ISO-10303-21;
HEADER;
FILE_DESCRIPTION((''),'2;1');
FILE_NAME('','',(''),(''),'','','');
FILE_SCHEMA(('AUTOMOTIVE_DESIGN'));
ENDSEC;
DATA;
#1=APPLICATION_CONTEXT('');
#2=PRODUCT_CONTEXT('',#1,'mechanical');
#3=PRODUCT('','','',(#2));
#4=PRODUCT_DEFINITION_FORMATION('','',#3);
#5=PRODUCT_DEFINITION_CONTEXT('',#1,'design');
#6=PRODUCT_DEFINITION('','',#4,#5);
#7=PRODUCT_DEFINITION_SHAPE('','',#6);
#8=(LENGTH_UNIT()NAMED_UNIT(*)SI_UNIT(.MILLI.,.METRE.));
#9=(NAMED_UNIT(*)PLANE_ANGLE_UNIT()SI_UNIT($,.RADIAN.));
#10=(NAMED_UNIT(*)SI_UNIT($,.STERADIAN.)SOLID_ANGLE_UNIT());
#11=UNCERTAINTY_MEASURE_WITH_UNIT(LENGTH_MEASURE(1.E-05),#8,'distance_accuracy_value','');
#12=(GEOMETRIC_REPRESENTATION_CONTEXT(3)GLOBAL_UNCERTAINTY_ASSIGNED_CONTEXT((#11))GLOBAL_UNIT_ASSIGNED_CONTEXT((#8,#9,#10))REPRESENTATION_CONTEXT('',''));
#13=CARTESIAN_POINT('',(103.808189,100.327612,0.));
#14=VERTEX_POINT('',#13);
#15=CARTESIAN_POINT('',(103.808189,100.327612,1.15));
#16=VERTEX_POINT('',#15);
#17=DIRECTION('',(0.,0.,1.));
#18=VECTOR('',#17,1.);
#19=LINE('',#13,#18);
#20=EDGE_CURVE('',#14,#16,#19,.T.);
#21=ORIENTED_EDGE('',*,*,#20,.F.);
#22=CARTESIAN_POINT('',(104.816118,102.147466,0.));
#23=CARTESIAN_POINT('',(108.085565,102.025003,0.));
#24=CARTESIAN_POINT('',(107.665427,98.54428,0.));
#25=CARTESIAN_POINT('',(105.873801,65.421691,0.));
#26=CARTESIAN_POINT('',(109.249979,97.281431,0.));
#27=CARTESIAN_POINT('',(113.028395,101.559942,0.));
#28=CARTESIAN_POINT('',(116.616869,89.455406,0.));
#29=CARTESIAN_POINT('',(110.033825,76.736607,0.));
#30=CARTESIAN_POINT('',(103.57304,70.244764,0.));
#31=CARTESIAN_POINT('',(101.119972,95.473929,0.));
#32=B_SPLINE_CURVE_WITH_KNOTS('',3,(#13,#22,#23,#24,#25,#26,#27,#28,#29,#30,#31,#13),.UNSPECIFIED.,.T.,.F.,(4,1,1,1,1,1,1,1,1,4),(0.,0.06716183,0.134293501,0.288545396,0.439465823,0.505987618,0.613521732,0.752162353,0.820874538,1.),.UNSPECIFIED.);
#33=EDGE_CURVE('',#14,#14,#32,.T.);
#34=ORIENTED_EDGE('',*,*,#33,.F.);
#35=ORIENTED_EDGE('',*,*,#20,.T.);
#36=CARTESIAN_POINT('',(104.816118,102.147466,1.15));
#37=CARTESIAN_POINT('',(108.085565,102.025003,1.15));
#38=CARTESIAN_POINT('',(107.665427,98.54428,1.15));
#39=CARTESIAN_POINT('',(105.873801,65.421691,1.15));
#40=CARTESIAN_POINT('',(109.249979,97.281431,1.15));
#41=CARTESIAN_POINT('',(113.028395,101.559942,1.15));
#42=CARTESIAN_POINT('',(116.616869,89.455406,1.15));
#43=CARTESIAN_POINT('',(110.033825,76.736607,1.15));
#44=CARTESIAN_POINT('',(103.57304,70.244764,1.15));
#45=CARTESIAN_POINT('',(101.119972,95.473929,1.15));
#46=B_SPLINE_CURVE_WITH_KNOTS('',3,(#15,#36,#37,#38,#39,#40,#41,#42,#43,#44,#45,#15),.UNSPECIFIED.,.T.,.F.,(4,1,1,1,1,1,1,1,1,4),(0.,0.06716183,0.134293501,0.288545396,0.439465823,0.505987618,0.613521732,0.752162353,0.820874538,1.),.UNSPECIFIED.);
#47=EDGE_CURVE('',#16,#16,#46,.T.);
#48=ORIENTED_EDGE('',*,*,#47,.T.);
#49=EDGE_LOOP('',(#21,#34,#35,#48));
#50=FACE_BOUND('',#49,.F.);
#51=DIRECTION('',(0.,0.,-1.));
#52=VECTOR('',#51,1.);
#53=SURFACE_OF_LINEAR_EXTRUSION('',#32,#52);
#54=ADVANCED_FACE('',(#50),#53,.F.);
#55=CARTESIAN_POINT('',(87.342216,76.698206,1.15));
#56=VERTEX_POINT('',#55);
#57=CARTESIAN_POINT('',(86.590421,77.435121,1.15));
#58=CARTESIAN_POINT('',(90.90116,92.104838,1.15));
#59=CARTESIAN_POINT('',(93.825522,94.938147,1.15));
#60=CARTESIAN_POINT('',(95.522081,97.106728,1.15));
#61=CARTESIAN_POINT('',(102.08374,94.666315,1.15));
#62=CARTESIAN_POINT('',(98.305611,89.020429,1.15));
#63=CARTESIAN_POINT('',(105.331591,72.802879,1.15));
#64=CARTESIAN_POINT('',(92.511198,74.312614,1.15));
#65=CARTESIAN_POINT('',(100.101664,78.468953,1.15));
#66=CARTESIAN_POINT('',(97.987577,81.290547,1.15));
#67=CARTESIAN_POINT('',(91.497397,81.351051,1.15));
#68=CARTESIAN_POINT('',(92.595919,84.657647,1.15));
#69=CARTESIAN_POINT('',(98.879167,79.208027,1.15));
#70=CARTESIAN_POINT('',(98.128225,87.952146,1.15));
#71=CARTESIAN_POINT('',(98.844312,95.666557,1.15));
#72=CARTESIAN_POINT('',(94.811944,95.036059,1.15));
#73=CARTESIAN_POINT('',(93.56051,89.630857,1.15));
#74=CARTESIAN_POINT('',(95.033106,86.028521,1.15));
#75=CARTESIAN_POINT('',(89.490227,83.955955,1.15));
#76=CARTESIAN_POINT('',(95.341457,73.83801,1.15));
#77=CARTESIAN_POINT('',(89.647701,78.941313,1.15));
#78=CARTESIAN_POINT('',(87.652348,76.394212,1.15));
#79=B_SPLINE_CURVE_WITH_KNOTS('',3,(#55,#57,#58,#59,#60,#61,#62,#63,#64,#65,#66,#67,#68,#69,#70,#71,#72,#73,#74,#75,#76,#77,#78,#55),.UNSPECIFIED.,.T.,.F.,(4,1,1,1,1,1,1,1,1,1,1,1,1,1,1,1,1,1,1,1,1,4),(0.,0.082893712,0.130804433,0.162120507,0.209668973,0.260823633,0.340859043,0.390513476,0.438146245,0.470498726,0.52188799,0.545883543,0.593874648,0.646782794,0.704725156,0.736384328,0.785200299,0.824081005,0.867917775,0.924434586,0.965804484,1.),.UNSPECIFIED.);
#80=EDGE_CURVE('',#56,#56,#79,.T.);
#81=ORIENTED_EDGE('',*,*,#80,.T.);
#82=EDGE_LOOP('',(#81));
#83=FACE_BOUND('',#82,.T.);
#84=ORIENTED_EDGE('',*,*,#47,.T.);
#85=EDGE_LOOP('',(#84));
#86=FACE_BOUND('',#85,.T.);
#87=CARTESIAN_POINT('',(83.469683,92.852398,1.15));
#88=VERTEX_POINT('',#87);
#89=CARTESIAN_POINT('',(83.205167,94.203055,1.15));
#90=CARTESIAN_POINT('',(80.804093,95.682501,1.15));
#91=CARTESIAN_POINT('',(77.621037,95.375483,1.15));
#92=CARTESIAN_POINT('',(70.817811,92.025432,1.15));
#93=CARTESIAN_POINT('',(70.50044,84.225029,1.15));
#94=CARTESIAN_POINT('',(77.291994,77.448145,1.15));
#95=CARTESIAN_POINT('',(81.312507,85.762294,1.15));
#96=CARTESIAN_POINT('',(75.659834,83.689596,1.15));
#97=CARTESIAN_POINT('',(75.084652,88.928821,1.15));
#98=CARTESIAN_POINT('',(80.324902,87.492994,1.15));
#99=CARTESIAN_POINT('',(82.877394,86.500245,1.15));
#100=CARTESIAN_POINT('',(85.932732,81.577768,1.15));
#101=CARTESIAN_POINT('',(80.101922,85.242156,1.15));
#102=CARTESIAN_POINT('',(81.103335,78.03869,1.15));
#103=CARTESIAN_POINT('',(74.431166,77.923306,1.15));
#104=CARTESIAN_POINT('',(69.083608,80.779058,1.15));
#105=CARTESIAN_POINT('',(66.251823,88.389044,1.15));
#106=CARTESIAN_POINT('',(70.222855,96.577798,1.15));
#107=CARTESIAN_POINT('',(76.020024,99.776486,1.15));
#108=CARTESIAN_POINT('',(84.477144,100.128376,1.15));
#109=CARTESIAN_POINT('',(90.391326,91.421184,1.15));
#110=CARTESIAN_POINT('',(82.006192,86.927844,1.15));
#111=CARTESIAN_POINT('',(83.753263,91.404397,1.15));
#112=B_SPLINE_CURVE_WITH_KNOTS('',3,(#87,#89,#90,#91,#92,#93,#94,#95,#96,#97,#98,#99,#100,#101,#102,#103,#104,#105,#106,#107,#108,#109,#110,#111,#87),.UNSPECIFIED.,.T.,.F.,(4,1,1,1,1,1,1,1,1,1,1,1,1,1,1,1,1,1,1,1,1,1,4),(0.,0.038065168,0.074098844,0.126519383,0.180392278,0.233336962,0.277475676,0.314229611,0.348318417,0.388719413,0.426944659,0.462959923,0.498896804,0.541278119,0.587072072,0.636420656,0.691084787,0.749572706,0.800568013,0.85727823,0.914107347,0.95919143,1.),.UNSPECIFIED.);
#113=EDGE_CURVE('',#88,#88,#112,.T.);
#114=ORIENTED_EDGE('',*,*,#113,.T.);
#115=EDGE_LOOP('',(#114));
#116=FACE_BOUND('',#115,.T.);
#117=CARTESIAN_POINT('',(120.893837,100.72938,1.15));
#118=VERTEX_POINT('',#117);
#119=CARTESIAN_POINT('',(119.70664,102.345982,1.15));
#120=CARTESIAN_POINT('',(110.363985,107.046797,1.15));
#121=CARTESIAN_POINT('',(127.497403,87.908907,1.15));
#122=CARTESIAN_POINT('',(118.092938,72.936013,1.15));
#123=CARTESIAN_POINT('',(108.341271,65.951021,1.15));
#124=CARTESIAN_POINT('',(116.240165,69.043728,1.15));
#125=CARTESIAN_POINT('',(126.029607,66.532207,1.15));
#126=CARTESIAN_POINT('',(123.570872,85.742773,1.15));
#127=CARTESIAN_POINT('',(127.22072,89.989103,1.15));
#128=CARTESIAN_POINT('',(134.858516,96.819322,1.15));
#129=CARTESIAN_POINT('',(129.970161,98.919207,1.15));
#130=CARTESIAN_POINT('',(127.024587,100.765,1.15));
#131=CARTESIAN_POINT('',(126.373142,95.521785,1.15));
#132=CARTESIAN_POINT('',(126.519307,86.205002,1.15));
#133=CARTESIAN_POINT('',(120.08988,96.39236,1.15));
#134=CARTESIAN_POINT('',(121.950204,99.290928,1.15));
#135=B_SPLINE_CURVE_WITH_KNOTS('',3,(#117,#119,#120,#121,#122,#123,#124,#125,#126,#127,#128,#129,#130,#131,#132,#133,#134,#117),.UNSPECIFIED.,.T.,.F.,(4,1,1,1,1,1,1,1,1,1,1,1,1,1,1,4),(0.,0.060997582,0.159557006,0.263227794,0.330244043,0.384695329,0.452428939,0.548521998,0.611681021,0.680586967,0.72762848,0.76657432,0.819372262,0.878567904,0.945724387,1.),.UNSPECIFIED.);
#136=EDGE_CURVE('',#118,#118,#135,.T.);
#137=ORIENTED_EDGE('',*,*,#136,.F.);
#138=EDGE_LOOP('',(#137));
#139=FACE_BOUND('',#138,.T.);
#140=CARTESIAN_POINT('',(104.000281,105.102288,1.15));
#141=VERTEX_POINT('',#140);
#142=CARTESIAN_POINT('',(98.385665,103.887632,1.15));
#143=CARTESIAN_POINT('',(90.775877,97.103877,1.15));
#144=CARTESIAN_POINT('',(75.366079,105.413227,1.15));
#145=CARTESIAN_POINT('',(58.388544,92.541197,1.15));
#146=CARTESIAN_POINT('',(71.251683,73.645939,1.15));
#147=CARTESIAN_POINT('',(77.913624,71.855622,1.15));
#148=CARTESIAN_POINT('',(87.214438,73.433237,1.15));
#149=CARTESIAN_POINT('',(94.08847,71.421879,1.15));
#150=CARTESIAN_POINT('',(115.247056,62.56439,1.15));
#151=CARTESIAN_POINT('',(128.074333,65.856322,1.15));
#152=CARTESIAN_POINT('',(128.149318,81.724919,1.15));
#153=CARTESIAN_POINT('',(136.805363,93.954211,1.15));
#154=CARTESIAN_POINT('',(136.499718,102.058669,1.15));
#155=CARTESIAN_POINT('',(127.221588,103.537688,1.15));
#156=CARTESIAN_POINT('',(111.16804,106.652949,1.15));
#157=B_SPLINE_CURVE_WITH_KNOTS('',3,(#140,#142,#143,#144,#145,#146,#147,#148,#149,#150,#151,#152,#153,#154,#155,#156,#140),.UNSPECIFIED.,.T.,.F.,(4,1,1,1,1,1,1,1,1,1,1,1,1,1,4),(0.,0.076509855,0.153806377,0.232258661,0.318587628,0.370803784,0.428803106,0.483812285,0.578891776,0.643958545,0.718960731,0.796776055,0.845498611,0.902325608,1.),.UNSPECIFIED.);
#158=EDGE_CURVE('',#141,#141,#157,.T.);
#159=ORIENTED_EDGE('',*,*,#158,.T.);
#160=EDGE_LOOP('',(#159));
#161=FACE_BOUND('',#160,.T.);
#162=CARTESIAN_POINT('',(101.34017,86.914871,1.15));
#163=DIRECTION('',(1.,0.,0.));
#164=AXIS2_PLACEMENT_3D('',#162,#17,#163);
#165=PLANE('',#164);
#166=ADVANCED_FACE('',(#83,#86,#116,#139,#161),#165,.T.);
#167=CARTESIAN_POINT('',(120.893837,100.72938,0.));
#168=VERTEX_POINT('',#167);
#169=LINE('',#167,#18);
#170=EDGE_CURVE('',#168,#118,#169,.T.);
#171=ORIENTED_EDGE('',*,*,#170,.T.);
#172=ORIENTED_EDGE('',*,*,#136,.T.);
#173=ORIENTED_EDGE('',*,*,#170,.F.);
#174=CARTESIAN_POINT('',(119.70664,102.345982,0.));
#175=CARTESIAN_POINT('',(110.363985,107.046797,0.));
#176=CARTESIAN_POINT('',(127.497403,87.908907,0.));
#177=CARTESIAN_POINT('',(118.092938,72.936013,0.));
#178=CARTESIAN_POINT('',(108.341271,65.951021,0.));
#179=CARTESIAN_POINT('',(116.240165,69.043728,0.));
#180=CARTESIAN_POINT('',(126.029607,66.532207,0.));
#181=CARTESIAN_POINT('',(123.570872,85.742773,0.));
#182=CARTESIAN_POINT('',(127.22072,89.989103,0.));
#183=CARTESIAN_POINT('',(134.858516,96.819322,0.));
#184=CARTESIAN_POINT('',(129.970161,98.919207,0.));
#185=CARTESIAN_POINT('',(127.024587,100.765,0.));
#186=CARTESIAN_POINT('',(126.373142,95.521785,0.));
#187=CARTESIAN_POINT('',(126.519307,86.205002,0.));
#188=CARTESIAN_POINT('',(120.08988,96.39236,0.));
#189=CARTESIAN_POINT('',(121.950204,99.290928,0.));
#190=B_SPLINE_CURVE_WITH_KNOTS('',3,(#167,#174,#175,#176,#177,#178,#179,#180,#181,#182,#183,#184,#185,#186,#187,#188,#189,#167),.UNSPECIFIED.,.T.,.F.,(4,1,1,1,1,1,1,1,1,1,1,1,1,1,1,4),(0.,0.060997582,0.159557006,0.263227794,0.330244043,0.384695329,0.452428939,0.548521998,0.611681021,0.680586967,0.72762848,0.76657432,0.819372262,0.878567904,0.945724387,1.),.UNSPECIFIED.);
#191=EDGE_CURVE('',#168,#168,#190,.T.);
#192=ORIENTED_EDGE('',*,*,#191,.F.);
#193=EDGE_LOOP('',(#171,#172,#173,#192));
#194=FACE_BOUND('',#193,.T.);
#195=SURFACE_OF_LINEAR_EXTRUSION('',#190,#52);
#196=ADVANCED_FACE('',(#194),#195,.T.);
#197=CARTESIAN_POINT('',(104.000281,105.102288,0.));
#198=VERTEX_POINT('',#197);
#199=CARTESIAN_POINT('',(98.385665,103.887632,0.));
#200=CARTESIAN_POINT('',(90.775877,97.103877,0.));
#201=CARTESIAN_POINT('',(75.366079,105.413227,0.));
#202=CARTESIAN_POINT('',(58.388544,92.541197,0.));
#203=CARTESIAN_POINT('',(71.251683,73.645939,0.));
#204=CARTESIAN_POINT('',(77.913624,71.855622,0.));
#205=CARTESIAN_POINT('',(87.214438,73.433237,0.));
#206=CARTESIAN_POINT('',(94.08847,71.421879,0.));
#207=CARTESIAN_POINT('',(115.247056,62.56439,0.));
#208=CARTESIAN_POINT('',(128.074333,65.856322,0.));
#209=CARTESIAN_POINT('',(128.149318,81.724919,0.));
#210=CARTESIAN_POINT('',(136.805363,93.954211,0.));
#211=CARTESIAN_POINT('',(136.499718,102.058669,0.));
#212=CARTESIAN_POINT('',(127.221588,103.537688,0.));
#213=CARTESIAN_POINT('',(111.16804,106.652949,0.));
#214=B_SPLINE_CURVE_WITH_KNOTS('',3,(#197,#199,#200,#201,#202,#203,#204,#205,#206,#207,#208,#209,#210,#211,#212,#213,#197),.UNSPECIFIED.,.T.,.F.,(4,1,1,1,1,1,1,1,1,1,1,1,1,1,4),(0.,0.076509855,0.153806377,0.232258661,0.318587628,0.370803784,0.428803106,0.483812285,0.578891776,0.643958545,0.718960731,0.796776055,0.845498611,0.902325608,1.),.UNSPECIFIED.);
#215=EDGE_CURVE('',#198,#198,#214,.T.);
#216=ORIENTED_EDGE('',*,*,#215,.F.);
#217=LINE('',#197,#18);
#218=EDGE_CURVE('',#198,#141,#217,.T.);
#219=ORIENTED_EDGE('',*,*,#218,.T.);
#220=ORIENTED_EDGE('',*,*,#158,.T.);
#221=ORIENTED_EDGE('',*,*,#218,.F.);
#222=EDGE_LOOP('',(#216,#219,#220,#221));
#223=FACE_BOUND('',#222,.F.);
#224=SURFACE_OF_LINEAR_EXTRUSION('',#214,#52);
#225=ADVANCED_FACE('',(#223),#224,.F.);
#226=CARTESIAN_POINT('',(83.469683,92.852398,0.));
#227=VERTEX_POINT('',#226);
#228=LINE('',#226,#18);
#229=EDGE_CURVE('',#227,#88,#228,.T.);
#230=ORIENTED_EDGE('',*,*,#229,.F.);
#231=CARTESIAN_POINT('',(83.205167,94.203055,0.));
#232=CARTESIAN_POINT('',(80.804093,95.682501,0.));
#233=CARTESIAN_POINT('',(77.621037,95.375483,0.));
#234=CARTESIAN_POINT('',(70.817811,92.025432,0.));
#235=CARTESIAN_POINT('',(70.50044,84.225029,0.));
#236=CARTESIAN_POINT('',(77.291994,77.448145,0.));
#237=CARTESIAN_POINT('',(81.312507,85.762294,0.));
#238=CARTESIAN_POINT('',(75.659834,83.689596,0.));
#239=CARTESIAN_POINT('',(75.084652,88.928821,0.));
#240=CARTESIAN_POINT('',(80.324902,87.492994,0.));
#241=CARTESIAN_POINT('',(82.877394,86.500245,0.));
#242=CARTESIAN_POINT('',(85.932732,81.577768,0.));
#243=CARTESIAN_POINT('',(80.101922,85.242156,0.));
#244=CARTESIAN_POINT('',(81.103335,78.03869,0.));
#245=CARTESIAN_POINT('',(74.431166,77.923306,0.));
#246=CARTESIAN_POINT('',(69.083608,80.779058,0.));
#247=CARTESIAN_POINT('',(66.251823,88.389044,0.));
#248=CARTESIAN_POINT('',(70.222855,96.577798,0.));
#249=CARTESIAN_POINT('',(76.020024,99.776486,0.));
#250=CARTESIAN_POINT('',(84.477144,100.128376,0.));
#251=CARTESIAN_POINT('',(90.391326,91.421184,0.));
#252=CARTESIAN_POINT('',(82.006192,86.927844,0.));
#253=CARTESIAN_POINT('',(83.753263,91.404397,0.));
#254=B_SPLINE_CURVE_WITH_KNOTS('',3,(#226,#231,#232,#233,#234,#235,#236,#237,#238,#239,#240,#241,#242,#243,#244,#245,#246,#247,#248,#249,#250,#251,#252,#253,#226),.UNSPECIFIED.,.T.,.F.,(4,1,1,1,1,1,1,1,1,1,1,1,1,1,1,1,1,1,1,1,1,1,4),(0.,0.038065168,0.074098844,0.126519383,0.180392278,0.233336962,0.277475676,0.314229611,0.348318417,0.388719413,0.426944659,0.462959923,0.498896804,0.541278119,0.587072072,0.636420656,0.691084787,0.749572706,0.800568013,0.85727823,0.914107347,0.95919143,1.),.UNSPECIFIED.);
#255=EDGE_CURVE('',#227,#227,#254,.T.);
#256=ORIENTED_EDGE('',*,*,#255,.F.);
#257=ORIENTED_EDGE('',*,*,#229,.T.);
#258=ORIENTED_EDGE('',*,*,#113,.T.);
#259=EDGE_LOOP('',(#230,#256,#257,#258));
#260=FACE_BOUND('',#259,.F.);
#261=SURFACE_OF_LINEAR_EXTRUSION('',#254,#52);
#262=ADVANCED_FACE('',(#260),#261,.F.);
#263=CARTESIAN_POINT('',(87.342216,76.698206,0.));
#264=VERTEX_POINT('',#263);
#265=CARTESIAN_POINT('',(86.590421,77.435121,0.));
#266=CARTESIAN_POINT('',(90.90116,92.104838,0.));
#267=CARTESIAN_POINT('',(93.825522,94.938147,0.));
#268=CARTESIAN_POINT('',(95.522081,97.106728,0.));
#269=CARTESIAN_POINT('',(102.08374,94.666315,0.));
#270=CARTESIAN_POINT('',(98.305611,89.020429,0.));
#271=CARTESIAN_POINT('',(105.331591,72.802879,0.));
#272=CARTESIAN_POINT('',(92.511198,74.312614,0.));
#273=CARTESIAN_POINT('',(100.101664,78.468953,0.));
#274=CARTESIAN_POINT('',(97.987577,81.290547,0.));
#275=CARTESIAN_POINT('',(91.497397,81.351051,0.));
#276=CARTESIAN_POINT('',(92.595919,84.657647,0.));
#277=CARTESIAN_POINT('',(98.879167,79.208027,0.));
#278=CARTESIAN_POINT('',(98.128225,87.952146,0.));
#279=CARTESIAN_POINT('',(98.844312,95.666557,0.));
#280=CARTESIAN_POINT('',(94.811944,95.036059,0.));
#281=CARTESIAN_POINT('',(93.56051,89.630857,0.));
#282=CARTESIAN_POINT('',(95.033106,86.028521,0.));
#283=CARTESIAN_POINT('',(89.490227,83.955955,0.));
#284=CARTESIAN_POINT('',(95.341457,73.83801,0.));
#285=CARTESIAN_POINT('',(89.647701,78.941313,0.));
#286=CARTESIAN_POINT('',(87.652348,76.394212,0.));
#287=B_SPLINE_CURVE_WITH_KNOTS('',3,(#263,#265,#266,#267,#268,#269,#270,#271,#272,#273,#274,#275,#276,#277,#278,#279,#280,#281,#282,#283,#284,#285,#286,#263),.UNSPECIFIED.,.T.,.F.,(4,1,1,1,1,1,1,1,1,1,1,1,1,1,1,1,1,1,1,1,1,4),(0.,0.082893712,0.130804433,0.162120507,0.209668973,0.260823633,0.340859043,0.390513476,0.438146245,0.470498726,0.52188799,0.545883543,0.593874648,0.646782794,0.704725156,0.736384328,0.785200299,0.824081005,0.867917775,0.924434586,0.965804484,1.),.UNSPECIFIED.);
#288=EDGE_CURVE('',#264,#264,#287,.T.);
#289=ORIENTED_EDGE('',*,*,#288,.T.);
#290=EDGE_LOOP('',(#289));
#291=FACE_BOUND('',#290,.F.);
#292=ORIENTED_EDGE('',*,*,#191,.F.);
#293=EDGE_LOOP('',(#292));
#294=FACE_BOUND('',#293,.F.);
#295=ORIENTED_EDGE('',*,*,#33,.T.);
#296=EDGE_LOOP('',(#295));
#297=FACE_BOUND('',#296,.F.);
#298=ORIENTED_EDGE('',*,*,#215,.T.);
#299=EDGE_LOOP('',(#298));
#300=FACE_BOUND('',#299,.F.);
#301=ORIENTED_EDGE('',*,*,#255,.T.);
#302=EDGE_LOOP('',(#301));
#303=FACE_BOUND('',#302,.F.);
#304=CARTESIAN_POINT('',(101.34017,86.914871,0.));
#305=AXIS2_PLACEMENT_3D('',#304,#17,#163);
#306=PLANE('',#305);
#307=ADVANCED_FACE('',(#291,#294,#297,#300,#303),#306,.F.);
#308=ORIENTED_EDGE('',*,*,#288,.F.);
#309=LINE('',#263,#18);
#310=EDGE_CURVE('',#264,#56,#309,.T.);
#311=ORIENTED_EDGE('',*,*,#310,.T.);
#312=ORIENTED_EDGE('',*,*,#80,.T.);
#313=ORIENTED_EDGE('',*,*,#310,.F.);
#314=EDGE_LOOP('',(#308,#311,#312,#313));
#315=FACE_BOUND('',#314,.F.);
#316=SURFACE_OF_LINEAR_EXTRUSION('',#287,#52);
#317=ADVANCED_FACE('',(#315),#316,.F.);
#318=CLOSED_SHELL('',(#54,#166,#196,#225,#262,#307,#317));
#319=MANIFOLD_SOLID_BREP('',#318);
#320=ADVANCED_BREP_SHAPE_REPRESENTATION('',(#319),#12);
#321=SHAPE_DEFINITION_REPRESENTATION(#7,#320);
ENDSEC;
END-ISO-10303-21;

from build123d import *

# Parameters (mm, degrees)
F1_DEPTH = 5
F3_SCALE = 0.23


# Not quite as in the source:
# - a feature names something its author has since deleted; it is built from what else it names


with BuildPart() as f1:
    # F0 (on Top) → F1 (new body)
    with BuildSketch(Plane.XY):
        with BuildLine():
            add(Edge.make_bspline(
                [(299.1526722908, 323.0784237385), (274.741297579, 317.7973106885), (241.6552621715, 288.3027220251), (174.6561440066, 324.4303302875), (100.8407748129, 268.4649814376), (156.7674642815, 186.3116869244), (185.7324239145, 178.5277009697), (226.1707484356, 185.3868960132), (256.0578422928, 176.6418628219), (348.0516956151, 138.1310389921), (403.8224652859, 152.4437889707), (404.1484862835, 221.437686785), (441.7834657542, 274.608521823), (440.4545733731, 309.8452976444), (400.1148772466, 316.2758146237), (330.3168429715, 329.8204245647), (299.1526722908, 323.0784237385)],
                knots=[0, 0, 0, 0, 0.0765098554, 0.1538063765, 0.232258661, 0.3185876279, 0.3708037843, 0.4288031062, 0.4838122847, 0.5788917757, 0.6439585446, 0.7189607313, 0.796776055, 0.8454986106, 0.9023256076, 1, 1, 1, 1], degree=3))
        make_face()
        with BuildLine():
            add(Edge.make_bspline(
                [(226.7263020449, 199.5824126484), (223.4576288788, 202.786391877), (242.1999725363, 266.5677697188), (254.9145889572, 278.8865041127), (262.2909315988, 288.3151160053), (290.8198837548, 277.7046283826), (274.3932370472, 253.1572964006), (304.9409766216, 182.6462111975), (249.2001381077, 189.2102738309), (282.2021647662, 207.2813126016), (273.0104797985, 219.5491142599), (244.7923070222, 219.8121758246), (249.5684914386, 234.1886770838), (276.8869616896, 210.4946765653), (273.6219951966, 248.512588351), (276.7354158182, 282.053506119), (259.2033811273, 279.3122075457), (253.762364876, 255.811330661), (260.1649557791, 240.1490025527), (236.0654816291, 231.1378453304), (261.5056115576, 187.1467772907), (236.7501491374, 209.3350521643), (228.0747030749, 198.2606993193), (226.7263020449, 199.5824126484)],
                knots=[0, 0, 0, 0, 0.0828937124, 0.1308044326, 0.162120507, 0.209668973, 0.2608236325, 0.3408590433, 0.3905134761, 0.4381462453, 0.470498726, 0.5218879901, 0.5458835427, 0.5938746477, 0.6467827945, 0.7047251559, 0.7363843276, 0.7852002992, 0.8240810053, 0.8679177748, 0.9244345861, 0.9658044835, 1, 1, 1, 1], degree=3))
        make_face(mode=Mode.SUBTRACT)
        with BuildLine():
            add(Edge.make_bspline(
                [(209.8892042679, 269.8180302978), (208.7391356913, 275.6904528202), (198.2996826517, 282.1228271055), (184.4603080574, 280.7879675176), (154.881065232, 266.2225276434), (153.5011906417, 232.3077326247), (183.0296869747, 202.8430171081), (200.5101768899, 238.9914929912), (175.9333386204, 229.9797622421), (173.4325463009, 252.7590006492), (196.2162419723, 246.5162755468), (207.3140331244, 242.1999747822), (220.5981134819, 220.7979000543), (195.2467628131, 236.7300207175), (199.6007343954, 205.4106041471), (170.5913017144, 204.9089331269), (147.341051391, 217.3252499023), (135.0289416593, 250.412145169), (152.2943006175, 286.015422634), (177.499382771, 299.9227596674), (214.2694685831, 301.4527181362), (239.9833012028, 263.595362143), (203.5262003375, 244.0591017529), (211.1221596549, 263.5223752981), (209.8892042679, 269.8180302978)],
                knots=[0, 0, 0, 0, 0.0380651676, 0.0740988442, 0.1265193827, 0.1803922784, 0.2333369623, 0.2774756756, 0.3142296108, 0.3483184172, 0.3887194127, 0.4269446592, 0.4629599231, 0.4988968041, 0.5412781193, 0.5870720719, 0.6364206556, 0.6910847872, 0.7495727059, 0.8005680131, 0.8572782298, 0.9141073466, 0.9591914305, 1, 1, 1, 1], degree=3))
        make_face(mode=Mode.SUBTRACT)
        with BuildLine():
            add(Edge.make_bspline(
                [(298.3174920082, 302.3189604282), (302.6997885354, 310.2313695533), (316.914777746, 309.6989205916), (315.0880893818, 294.5653440912), (307.2984114695, 150.554089505), (321.9774488212, 289.0746952033), (338.4053423789, 307.6769167334), (354.0074026958, 255.0484992427), (325.3854707834, 199.7493760856), (297.29510477, 171.5239700843), (286.6295899339, 281.2159925089), (298.3174920082, 302.3189604282)],
                knots=[0, 0, 0, 0, 0.0671618297, 0.1342935011, 0.2885453965, 0.4394658231, 0.5059876178, 0.6135217323, 0.7521623528, 0.8208745383, 1, 1, 1, 1], degree=3))
        make_face(mode=Mode.SUBTRACT)
        with BuildLine():
            add(Edge.make_bspline(
                [(372.602917254, 304.0657788515), (367.4411923009, 311.0944849221), (326.8209510066, 331.53281104), (401.3140745104, 248.3245923877), (360.4250959964, 183.2250523588), (318.0265408159, 152.8555238781), (352.3695619063, 166.3020741455), (394.9323531346, 155.3824192087), (384.2421996806, 238.9066187979), (400.1111024667, 257.3689215259), (433.3189122381, 287.0655246284), (412.0651962212, 296.1954629907), (399.2583506311, 304.2206475385), (396.4259826336, 281.424061096), (397.0614821118, 240.9163112112), (369.1074517704, 285.2091693505), (377.1958170977, 297.8116403016), (372.602917254, 304.0657788515)],
                knots=[0, 0, 0, 0, 0.0609975824, 0.1595570064, 0.263227794, 0.3302440429, 0.3846953289, 0.4524289392, 0.5485219976, 0.6116810214, 0.6805869671, 0.7276284801, 0.7665743202, 0.8193722618, 0.8785679043, 0.9457243869, 1, 1, 1, 1], degree=3))
        make_face(mode=Mode.SUBTRACT)
    extrude(amount=F1_DEPTH)


with BuildPart() as f1_1:
    # F3: moved
    add(f1.part.scale(F3_SCALE).moved(Location((35.1951662451, 30.7942508906, 0))))


solid = f1_1.part
